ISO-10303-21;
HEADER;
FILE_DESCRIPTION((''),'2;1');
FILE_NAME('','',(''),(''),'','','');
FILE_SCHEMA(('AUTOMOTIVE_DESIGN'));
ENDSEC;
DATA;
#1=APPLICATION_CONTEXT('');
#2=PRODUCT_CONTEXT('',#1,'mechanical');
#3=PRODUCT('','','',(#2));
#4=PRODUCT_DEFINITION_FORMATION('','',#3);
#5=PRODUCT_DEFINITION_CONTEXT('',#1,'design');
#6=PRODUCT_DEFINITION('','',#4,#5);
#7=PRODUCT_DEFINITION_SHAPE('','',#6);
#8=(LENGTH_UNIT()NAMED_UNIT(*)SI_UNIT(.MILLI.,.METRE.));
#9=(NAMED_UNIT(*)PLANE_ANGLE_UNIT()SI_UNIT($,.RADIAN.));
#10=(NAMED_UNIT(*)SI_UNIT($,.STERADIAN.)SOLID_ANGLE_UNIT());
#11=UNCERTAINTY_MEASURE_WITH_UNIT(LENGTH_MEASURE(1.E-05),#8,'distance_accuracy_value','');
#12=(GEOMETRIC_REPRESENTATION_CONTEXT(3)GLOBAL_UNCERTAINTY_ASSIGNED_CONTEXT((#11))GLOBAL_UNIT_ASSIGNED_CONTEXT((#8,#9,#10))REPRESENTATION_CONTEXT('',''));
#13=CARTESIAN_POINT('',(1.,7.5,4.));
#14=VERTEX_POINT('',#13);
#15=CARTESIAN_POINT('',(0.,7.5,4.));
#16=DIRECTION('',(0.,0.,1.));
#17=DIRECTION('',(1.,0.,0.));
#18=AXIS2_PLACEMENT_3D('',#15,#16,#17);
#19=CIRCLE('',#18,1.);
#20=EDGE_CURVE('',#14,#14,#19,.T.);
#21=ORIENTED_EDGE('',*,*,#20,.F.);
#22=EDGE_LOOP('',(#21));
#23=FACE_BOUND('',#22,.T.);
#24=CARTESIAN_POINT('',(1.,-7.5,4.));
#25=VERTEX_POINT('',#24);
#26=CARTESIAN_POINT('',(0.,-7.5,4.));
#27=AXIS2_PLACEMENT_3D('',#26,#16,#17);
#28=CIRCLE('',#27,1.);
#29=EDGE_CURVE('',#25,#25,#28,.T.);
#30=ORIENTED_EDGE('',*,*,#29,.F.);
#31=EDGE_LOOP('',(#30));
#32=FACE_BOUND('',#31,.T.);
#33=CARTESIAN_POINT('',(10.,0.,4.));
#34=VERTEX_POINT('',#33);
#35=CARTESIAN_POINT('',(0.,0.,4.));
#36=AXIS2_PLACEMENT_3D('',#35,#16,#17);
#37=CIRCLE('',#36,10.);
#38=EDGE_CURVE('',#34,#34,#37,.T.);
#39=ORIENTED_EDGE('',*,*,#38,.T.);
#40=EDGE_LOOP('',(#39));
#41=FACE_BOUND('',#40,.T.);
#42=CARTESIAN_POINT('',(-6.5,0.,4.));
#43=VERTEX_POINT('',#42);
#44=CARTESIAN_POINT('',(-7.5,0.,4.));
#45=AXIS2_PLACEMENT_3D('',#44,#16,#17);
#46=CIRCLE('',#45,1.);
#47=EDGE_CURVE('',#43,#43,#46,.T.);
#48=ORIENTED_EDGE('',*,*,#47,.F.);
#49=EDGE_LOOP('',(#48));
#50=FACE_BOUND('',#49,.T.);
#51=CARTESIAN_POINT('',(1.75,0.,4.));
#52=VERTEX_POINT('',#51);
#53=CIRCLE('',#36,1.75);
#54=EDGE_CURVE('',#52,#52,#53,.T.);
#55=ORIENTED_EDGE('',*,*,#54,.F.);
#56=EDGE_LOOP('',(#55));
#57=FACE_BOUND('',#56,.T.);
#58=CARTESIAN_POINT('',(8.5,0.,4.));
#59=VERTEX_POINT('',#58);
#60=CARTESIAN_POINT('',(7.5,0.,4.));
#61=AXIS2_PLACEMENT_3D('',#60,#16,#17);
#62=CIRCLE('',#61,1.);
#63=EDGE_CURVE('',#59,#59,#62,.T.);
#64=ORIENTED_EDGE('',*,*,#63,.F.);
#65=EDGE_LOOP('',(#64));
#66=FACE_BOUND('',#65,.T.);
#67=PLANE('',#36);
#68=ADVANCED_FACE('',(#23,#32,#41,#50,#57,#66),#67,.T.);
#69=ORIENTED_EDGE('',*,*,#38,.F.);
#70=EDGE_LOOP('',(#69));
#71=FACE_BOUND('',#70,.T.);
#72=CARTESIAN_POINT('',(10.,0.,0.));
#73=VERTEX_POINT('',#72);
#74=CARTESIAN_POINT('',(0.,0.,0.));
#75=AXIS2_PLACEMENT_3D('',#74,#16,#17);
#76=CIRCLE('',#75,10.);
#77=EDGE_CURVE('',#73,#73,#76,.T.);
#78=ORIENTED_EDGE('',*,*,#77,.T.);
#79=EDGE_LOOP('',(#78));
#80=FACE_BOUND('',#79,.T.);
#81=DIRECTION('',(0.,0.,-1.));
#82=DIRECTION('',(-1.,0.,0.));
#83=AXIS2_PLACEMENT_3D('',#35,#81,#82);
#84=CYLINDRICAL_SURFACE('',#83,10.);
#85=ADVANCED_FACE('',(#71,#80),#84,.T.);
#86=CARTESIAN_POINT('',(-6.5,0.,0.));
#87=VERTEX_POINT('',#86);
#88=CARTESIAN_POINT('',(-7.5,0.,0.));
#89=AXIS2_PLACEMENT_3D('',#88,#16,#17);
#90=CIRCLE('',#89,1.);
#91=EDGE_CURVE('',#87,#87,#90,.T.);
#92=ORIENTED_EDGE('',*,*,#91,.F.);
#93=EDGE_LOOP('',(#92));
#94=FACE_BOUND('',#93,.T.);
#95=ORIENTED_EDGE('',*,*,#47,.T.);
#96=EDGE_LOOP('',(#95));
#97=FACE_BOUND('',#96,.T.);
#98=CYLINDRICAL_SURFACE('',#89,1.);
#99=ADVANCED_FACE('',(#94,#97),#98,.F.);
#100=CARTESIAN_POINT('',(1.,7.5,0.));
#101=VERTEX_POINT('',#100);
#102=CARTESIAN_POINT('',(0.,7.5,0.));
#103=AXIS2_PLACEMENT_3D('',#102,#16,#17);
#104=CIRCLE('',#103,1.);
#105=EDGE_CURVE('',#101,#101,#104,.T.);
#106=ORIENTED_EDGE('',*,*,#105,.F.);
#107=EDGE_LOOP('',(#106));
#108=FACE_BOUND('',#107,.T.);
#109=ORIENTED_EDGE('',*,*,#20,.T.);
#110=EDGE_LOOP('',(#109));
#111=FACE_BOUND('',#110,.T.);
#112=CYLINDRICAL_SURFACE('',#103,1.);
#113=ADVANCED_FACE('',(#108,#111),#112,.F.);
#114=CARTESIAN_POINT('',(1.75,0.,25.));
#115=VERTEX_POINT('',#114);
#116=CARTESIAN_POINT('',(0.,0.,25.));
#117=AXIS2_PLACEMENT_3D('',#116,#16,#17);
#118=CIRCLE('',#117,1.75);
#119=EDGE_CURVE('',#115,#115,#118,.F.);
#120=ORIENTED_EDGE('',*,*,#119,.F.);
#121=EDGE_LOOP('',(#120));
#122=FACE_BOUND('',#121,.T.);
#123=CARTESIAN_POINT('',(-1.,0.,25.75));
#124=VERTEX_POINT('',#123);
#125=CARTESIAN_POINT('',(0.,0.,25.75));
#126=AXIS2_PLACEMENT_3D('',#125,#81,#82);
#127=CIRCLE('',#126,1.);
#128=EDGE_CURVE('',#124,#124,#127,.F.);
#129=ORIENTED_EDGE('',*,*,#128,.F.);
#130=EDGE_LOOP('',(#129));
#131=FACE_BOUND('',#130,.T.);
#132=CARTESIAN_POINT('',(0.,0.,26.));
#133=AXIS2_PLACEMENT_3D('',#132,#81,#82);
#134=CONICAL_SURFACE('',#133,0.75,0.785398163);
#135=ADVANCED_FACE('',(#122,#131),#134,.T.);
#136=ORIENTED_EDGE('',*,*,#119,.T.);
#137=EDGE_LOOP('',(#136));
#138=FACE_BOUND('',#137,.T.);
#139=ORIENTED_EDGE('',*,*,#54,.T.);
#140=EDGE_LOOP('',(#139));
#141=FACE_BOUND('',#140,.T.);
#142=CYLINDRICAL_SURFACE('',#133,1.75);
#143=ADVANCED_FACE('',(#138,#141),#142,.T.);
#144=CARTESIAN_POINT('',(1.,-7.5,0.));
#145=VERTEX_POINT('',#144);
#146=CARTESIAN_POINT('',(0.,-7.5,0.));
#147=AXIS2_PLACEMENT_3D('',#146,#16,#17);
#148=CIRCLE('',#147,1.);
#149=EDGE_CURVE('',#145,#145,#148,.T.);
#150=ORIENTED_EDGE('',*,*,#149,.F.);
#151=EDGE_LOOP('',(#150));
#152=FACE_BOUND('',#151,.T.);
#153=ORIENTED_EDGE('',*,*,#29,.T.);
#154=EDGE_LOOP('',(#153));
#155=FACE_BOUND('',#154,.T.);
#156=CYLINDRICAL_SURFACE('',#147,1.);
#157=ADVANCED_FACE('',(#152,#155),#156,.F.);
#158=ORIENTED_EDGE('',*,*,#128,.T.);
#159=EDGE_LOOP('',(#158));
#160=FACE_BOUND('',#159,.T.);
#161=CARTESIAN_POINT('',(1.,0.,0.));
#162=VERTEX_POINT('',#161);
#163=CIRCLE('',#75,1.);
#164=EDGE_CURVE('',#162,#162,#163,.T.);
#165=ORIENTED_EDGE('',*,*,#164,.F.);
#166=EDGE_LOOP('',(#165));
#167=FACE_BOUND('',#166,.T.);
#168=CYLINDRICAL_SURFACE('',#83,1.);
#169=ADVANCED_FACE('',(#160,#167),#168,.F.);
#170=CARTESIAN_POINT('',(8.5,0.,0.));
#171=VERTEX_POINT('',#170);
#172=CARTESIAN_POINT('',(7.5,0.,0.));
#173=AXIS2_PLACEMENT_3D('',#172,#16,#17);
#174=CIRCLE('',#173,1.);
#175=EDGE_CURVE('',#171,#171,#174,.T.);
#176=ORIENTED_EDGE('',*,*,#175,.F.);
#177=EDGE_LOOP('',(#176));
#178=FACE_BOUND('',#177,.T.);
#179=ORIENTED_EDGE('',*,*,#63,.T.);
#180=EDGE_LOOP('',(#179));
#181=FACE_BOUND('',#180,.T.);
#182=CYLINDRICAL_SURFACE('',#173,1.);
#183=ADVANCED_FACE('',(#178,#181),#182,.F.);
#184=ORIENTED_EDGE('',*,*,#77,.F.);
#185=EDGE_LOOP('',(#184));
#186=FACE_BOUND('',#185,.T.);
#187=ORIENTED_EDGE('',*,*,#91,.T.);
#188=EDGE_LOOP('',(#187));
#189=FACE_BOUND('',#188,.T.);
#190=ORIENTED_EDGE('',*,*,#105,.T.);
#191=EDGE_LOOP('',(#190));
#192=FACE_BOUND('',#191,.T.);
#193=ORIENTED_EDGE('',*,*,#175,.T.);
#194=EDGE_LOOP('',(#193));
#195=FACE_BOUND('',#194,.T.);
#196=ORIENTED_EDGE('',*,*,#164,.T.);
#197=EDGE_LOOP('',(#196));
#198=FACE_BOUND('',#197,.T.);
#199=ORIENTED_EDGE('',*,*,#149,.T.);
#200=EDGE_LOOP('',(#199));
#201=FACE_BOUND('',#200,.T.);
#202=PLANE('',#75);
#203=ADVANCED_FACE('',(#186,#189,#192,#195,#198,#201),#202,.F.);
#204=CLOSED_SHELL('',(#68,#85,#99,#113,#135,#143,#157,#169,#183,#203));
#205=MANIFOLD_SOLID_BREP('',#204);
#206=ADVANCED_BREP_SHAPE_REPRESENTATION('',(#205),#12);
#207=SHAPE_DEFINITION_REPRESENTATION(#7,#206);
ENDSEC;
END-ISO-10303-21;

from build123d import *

# Parameters (mm, degrees)
SKETCH1_R           = 10
SKETCH1_R_2         = 1
BOSS_EXTRUDE1_DEPTH = 4
SKETCH2_R           = 1.75
SKETCH2_R_2         = 1
BOSS_EXTRUDE2_DEPTH = 22
CHAMFER1_SIZE       = 1
SKETCH3_R           = 1
CUT_EXTRUDE1_DEPTH  = 26.943448113


with BuildPart() as part:
    # Sketch1 → Boss-Extrude1 (new body)
    with BuildSketch(Plane.XY):
        Circle(SKETCH1_R)
        Circle(SKETCH1_R_2, mode=Mode.SUBTRACT)
    extrude(amount=BOSS_EXTRUDE1_DEPTH)

    # Sketch2 → Boss-Extrude2 (add)
    with BuildSketch(Plane.XY.offset(4)):
        Circle(SKETCH2_R)
        Circle(SKETCH2_R_2, mode=Mode.SUBTRACT)
    extrude(amount=BOSS_EXTRUDE2_DEPTH)

    # Chamfer1
    # the kernel refuses this chamfer: 1 mm, written as the material it takes off along each edge
    with BuildSketch(Plane(origin=(0, 0, 26), x_dir=(1, 0, 0), z_dir=(0, -1, 0))) as chamfer1_piece_1:
        Polygon((1.75, -CHAMFER1_SIZE), (1.75 - CHAMFER1_SIZE, 0), (1.75, 0), align=None)
    revolve(axis=Axis((0, 0, 26), (0, 0, 1)), mode=Mode.SUBTRACT)

    # Sketch3 → Cut-Extrude1 (cut, through all)
    with BuildSketch(Plane.XY.offset(4)):
        with Locations((0, 7.5)):
            Circle(SKETCH3_R)
        with Locations((-7.5, 0)):
            Circle(SKETCH3_R)
        with Locations((7.5, 0)):
            Circle(SKETCH3_R)
        with Locations((0, -7.5)):
            Circle(SKETCH3_R)
    extrude(amount=-CUT_EXTRUDE1_DEPTH, mode=Mode.SUBTRACT)


solid = part.part
